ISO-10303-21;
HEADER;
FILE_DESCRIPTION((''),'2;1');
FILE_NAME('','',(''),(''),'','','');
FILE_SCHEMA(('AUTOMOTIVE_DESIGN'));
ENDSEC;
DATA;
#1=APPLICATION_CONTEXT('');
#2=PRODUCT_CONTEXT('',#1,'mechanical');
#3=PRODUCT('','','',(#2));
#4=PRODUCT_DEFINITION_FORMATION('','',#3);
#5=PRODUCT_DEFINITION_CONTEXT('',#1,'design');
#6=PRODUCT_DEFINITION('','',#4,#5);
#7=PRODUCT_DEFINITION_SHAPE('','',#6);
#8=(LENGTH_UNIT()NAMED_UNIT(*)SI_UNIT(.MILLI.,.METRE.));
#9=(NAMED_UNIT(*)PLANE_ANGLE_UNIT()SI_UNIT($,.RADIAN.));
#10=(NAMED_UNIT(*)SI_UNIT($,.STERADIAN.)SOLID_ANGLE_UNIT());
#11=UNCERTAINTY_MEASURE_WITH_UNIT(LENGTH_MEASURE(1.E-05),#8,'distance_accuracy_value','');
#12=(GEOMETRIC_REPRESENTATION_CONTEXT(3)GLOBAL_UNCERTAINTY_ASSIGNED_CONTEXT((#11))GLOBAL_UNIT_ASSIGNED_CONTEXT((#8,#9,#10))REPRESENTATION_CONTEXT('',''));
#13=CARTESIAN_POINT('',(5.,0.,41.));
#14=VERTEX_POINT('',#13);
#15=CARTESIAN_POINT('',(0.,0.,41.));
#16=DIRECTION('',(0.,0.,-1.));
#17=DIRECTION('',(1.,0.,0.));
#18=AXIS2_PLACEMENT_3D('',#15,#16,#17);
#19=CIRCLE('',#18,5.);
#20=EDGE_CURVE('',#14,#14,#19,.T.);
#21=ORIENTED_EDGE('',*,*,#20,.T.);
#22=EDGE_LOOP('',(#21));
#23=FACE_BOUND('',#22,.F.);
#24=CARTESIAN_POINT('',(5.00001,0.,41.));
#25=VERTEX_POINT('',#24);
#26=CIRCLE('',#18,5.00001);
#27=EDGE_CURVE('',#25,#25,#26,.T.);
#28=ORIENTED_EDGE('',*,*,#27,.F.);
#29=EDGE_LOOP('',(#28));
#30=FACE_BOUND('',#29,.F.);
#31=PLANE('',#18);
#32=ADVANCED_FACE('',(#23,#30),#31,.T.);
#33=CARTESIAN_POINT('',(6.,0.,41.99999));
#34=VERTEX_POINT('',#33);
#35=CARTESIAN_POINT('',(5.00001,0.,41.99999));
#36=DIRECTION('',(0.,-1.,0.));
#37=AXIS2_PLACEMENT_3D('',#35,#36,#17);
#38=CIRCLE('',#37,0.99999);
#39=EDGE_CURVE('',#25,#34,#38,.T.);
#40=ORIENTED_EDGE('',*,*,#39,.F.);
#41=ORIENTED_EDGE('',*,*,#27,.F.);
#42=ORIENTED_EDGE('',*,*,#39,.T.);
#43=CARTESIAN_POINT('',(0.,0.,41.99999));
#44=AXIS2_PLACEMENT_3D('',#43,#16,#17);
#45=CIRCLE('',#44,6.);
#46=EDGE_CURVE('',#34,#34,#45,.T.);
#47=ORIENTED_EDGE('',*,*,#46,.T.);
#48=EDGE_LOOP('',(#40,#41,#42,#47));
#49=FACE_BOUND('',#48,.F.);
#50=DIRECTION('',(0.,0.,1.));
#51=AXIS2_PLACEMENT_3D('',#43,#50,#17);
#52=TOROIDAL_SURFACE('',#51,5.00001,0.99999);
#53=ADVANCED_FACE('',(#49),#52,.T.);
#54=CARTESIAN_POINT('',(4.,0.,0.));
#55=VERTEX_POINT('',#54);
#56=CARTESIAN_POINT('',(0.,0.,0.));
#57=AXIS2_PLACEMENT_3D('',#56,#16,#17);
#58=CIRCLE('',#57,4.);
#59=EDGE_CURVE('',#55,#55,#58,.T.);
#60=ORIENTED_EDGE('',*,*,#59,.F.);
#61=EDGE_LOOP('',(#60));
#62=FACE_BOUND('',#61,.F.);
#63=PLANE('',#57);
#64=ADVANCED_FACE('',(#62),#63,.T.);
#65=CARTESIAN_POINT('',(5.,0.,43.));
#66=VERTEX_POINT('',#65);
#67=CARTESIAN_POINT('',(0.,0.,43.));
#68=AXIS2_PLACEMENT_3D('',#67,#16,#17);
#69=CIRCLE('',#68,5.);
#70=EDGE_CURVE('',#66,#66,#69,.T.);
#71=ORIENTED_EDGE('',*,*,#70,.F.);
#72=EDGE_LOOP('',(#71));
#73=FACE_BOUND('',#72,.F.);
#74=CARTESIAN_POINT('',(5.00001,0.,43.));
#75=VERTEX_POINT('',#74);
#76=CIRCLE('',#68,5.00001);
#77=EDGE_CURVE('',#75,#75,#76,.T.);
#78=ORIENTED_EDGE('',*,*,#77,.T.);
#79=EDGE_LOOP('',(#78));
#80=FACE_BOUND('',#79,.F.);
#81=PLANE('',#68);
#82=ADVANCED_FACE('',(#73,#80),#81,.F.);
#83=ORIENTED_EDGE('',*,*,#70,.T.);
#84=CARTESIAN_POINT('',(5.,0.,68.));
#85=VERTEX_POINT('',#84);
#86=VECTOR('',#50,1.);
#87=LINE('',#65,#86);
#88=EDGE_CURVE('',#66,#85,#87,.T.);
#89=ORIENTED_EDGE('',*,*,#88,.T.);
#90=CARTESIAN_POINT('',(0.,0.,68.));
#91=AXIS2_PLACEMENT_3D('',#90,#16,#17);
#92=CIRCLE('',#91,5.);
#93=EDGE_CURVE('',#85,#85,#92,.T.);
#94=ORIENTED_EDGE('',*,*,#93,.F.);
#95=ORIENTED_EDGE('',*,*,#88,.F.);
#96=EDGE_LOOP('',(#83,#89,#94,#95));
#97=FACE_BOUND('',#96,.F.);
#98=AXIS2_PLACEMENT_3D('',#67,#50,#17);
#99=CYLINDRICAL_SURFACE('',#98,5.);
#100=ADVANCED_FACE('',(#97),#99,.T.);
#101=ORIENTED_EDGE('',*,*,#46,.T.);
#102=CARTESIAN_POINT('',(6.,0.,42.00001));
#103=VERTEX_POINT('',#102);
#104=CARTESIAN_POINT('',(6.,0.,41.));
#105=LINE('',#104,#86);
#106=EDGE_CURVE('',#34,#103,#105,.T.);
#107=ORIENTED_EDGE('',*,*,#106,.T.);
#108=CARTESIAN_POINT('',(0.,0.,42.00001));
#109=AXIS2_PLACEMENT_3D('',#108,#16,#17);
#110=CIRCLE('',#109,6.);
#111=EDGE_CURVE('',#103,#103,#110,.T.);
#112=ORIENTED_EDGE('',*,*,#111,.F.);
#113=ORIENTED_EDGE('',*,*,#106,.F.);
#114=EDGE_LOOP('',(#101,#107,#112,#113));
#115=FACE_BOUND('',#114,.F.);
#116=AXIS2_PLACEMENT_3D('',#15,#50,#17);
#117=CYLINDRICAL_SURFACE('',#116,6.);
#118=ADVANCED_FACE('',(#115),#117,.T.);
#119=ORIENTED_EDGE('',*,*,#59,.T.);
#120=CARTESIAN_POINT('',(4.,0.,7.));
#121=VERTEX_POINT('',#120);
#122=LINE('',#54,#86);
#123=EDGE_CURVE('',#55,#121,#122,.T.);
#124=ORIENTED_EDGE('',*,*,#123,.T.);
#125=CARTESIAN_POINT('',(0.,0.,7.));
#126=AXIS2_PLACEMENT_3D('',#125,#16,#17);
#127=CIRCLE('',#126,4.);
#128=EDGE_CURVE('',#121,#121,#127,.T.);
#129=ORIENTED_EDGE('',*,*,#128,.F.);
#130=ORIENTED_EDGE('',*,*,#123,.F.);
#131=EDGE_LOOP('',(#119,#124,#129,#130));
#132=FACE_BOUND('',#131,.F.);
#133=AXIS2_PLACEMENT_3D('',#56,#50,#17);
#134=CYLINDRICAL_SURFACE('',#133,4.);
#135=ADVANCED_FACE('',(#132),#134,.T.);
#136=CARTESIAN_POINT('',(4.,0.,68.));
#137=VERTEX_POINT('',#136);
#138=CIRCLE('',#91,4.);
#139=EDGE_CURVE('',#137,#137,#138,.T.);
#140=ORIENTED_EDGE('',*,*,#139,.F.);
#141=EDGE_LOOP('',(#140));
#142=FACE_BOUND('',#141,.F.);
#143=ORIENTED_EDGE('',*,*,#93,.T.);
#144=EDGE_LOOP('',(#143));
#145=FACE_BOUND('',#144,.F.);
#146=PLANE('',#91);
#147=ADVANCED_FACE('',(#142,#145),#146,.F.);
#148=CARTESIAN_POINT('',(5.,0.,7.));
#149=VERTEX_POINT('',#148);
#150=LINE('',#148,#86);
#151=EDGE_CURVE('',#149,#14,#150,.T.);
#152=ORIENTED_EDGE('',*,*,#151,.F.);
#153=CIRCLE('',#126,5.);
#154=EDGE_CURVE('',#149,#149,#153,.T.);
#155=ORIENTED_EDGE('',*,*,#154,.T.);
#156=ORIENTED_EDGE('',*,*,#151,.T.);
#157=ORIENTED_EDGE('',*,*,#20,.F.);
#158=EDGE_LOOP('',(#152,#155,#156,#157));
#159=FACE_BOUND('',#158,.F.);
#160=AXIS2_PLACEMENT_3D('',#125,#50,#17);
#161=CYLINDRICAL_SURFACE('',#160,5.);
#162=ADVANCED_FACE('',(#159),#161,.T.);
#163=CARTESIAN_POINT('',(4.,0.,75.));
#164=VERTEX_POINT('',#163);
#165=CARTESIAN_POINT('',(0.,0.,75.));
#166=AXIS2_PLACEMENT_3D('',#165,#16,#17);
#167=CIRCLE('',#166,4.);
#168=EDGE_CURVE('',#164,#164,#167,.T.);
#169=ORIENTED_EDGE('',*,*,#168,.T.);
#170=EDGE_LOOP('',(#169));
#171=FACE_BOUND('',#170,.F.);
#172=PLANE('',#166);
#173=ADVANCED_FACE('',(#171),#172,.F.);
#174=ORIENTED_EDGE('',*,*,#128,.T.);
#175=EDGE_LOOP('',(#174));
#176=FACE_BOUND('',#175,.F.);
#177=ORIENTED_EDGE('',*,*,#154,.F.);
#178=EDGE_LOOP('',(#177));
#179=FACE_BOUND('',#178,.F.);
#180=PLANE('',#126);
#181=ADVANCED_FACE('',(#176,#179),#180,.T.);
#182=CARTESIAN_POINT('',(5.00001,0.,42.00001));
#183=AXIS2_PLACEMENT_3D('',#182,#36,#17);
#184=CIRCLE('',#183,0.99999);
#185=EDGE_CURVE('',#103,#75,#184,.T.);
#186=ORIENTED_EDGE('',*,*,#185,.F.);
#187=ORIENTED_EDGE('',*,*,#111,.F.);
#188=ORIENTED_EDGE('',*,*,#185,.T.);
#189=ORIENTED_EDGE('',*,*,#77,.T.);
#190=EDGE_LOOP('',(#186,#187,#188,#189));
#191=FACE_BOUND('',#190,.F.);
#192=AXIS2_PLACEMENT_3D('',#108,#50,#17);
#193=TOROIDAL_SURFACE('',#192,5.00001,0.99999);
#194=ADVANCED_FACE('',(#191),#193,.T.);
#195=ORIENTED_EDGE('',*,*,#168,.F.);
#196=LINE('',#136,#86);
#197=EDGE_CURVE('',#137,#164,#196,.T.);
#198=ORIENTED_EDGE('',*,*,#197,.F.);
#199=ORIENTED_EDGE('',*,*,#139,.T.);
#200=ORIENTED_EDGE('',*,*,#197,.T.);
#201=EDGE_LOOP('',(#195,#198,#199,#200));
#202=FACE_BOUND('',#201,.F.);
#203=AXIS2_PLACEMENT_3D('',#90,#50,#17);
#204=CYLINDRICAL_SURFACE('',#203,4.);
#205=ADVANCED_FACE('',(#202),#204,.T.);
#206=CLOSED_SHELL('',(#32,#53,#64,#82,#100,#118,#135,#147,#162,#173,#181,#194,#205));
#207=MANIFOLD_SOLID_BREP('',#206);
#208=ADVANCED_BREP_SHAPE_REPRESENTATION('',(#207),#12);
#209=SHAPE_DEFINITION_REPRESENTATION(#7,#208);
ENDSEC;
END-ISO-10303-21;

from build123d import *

# Parameters (mm, degrees)
F2_R = 0.99999


# Not quite as in the source:
# - a fillet or chamfer is up to 0.001 mm smaller than in the source, because OpenCascade refuses the exact size


with BuildPart() as f1:
    # F0 (on Front) → F1 (revolve)
    with BuildSketch(Plane.XZ):
        Polygon((4, 75), (0, 75), (0, 0), (4, 0), (4, 7), (5, 7), (5, 41), (6, 41), (6, 43), (5, 43), (5, 68), (4, 68), align=None)
    revolve(axis=Axis((0, 0, 37.5), (0, 0, -1)))

    # F2 (radius 1 in the source; OpenCascade refuses exactly that, so slightly less here)
    f2_edges = [f1.edges().sort_by_distance(p)[0] for p in [
        (-6, 0, 41),
        (-6, 0, 43),
        (6, 0, 42),
    ]]
    fillet(f2_edges, radius=F2_R)


solid = f1.part
